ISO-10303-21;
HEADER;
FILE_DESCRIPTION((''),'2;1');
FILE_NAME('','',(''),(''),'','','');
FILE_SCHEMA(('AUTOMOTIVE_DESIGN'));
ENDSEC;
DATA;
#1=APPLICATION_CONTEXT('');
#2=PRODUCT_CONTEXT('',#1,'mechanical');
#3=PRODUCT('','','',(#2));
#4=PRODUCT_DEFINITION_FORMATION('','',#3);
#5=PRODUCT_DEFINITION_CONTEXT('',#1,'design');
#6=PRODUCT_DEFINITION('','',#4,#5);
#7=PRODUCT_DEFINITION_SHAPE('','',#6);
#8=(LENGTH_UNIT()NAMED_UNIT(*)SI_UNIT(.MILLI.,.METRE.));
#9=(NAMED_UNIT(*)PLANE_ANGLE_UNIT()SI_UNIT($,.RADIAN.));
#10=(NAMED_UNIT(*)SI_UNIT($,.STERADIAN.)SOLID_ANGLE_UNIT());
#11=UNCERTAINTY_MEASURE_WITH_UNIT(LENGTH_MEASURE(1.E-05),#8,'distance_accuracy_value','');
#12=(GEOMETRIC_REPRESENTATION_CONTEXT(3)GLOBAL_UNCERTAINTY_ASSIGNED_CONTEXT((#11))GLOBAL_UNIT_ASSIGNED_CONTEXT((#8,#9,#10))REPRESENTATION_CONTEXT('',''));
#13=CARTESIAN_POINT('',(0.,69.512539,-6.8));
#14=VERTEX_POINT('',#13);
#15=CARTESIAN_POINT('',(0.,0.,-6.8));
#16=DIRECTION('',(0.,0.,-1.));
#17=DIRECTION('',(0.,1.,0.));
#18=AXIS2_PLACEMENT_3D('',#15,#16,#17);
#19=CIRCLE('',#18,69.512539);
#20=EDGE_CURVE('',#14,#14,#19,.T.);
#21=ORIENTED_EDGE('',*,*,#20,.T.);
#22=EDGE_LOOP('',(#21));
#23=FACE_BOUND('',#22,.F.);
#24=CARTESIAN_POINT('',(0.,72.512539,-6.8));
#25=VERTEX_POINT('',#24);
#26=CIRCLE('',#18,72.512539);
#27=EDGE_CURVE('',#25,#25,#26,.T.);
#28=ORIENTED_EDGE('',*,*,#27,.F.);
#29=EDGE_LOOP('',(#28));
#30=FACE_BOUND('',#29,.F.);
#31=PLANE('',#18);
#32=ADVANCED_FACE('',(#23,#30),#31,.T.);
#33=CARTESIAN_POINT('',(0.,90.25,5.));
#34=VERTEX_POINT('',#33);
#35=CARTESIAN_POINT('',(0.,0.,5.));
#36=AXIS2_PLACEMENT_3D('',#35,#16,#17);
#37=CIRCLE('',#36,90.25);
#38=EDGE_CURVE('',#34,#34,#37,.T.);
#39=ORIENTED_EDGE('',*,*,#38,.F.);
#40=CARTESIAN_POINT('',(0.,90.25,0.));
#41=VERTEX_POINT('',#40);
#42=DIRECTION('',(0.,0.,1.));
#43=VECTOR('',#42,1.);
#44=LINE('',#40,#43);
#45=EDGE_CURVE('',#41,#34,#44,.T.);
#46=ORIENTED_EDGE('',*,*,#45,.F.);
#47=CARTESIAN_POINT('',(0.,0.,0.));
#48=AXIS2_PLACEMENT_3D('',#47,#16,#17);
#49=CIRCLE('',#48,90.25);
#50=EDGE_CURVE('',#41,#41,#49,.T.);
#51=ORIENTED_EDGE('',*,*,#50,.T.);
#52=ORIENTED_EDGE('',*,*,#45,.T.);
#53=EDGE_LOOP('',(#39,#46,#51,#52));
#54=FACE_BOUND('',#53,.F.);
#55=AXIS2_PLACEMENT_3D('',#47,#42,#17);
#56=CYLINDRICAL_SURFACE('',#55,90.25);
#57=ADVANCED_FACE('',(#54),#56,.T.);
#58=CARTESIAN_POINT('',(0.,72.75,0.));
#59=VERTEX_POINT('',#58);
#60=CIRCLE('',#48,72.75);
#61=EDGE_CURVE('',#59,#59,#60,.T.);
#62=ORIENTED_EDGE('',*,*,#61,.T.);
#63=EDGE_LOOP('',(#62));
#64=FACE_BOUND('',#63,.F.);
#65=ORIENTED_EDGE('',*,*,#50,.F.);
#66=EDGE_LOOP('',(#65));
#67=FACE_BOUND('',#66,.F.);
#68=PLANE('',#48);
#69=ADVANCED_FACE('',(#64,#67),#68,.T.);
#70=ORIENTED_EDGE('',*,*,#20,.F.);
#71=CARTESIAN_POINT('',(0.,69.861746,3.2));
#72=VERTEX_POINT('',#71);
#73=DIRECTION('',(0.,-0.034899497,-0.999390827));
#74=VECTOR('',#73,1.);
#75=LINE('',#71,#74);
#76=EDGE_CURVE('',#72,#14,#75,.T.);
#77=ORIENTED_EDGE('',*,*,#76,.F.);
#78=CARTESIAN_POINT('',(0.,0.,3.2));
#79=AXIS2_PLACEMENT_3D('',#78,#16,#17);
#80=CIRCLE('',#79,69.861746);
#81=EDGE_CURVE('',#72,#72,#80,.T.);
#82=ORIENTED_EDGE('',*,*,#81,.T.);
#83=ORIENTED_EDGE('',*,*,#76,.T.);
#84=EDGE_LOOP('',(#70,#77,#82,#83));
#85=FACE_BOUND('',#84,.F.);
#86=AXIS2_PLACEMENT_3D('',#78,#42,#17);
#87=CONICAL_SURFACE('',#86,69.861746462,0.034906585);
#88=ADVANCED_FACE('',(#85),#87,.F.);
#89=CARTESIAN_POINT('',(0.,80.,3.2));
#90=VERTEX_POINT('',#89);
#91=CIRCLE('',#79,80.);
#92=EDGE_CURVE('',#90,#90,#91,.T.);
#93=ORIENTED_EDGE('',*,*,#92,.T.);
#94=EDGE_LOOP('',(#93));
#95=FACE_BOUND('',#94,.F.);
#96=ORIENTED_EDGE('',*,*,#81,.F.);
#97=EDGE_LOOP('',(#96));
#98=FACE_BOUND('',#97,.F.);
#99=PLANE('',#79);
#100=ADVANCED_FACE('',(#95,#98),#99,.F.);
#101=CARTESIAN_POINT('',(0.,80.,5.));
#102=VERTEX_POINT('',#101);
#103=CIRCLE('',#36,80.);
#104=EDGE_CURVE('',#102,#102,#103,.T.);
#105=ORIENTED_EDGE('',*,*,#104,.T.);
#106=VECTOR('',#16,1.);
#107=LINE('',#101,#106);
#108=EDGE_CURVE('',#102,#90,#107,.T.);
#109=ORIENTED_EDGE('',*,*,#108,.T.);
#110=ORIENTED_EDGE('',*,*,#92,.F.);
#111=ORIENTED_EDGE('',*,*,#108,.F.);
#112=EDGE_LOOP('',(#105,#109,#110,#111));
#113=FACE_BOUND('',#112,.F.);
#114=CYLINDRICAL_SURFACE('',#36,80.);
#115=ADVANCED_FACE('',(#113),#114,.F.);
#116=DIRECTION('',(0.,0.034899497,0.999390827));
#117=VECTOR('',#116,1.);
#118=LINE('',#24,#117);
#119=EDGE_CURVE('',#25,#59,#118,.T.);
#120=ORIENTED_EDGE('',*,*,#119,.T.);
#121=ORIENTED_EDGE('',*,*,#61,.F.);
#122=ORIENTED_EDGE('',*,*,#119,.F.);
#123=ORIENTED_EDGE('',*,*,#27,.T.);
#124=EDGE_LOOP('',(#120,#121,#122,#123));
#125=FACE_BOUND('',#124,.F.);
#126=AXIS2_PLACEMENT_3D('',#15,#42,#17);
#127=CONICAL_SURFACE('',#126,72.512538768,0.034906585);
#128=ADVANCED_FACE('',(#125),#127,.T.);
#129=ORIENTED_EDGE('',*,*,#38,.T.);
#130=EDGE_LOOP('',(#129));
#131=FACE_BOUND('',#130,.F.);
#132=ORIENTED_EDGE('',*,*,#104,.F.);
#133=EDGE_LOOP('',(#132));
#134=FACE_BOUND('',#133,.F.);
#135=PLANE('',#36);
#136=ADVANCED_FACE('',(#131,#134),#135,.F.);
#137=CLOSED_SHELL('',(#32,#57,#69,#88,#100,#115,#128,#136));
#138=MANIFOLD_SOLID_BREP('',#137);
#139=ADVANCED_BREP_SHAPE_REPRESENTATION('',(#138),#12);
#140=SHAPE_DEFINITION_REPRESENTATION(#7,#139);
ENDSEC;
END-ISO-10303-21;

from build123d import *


# Not quite as in the source:
# - a feature of the source that left no trace in its solid (it failed there, or was rolled back) is left out
# - the program builds the solid bodies; features that only make, move or delete a surface that nothing else refers to are left out


with BuildPart() as f1:
    # F0 (on Right) → F1 (revolve)
    with BuildSketch(Plane.YZ):
        Polygon((90.25, 0), (90.25, 5), (80, 5), (80, 3.2), (69.8617464624, 3.2), (69.5125387675, -6.8), (72.5125387675, -6.8), (72.75, 0), align=None)
    revolve(axis=Axis((0, 0, 0), (0, 0, -1)))


solid = f1.part
